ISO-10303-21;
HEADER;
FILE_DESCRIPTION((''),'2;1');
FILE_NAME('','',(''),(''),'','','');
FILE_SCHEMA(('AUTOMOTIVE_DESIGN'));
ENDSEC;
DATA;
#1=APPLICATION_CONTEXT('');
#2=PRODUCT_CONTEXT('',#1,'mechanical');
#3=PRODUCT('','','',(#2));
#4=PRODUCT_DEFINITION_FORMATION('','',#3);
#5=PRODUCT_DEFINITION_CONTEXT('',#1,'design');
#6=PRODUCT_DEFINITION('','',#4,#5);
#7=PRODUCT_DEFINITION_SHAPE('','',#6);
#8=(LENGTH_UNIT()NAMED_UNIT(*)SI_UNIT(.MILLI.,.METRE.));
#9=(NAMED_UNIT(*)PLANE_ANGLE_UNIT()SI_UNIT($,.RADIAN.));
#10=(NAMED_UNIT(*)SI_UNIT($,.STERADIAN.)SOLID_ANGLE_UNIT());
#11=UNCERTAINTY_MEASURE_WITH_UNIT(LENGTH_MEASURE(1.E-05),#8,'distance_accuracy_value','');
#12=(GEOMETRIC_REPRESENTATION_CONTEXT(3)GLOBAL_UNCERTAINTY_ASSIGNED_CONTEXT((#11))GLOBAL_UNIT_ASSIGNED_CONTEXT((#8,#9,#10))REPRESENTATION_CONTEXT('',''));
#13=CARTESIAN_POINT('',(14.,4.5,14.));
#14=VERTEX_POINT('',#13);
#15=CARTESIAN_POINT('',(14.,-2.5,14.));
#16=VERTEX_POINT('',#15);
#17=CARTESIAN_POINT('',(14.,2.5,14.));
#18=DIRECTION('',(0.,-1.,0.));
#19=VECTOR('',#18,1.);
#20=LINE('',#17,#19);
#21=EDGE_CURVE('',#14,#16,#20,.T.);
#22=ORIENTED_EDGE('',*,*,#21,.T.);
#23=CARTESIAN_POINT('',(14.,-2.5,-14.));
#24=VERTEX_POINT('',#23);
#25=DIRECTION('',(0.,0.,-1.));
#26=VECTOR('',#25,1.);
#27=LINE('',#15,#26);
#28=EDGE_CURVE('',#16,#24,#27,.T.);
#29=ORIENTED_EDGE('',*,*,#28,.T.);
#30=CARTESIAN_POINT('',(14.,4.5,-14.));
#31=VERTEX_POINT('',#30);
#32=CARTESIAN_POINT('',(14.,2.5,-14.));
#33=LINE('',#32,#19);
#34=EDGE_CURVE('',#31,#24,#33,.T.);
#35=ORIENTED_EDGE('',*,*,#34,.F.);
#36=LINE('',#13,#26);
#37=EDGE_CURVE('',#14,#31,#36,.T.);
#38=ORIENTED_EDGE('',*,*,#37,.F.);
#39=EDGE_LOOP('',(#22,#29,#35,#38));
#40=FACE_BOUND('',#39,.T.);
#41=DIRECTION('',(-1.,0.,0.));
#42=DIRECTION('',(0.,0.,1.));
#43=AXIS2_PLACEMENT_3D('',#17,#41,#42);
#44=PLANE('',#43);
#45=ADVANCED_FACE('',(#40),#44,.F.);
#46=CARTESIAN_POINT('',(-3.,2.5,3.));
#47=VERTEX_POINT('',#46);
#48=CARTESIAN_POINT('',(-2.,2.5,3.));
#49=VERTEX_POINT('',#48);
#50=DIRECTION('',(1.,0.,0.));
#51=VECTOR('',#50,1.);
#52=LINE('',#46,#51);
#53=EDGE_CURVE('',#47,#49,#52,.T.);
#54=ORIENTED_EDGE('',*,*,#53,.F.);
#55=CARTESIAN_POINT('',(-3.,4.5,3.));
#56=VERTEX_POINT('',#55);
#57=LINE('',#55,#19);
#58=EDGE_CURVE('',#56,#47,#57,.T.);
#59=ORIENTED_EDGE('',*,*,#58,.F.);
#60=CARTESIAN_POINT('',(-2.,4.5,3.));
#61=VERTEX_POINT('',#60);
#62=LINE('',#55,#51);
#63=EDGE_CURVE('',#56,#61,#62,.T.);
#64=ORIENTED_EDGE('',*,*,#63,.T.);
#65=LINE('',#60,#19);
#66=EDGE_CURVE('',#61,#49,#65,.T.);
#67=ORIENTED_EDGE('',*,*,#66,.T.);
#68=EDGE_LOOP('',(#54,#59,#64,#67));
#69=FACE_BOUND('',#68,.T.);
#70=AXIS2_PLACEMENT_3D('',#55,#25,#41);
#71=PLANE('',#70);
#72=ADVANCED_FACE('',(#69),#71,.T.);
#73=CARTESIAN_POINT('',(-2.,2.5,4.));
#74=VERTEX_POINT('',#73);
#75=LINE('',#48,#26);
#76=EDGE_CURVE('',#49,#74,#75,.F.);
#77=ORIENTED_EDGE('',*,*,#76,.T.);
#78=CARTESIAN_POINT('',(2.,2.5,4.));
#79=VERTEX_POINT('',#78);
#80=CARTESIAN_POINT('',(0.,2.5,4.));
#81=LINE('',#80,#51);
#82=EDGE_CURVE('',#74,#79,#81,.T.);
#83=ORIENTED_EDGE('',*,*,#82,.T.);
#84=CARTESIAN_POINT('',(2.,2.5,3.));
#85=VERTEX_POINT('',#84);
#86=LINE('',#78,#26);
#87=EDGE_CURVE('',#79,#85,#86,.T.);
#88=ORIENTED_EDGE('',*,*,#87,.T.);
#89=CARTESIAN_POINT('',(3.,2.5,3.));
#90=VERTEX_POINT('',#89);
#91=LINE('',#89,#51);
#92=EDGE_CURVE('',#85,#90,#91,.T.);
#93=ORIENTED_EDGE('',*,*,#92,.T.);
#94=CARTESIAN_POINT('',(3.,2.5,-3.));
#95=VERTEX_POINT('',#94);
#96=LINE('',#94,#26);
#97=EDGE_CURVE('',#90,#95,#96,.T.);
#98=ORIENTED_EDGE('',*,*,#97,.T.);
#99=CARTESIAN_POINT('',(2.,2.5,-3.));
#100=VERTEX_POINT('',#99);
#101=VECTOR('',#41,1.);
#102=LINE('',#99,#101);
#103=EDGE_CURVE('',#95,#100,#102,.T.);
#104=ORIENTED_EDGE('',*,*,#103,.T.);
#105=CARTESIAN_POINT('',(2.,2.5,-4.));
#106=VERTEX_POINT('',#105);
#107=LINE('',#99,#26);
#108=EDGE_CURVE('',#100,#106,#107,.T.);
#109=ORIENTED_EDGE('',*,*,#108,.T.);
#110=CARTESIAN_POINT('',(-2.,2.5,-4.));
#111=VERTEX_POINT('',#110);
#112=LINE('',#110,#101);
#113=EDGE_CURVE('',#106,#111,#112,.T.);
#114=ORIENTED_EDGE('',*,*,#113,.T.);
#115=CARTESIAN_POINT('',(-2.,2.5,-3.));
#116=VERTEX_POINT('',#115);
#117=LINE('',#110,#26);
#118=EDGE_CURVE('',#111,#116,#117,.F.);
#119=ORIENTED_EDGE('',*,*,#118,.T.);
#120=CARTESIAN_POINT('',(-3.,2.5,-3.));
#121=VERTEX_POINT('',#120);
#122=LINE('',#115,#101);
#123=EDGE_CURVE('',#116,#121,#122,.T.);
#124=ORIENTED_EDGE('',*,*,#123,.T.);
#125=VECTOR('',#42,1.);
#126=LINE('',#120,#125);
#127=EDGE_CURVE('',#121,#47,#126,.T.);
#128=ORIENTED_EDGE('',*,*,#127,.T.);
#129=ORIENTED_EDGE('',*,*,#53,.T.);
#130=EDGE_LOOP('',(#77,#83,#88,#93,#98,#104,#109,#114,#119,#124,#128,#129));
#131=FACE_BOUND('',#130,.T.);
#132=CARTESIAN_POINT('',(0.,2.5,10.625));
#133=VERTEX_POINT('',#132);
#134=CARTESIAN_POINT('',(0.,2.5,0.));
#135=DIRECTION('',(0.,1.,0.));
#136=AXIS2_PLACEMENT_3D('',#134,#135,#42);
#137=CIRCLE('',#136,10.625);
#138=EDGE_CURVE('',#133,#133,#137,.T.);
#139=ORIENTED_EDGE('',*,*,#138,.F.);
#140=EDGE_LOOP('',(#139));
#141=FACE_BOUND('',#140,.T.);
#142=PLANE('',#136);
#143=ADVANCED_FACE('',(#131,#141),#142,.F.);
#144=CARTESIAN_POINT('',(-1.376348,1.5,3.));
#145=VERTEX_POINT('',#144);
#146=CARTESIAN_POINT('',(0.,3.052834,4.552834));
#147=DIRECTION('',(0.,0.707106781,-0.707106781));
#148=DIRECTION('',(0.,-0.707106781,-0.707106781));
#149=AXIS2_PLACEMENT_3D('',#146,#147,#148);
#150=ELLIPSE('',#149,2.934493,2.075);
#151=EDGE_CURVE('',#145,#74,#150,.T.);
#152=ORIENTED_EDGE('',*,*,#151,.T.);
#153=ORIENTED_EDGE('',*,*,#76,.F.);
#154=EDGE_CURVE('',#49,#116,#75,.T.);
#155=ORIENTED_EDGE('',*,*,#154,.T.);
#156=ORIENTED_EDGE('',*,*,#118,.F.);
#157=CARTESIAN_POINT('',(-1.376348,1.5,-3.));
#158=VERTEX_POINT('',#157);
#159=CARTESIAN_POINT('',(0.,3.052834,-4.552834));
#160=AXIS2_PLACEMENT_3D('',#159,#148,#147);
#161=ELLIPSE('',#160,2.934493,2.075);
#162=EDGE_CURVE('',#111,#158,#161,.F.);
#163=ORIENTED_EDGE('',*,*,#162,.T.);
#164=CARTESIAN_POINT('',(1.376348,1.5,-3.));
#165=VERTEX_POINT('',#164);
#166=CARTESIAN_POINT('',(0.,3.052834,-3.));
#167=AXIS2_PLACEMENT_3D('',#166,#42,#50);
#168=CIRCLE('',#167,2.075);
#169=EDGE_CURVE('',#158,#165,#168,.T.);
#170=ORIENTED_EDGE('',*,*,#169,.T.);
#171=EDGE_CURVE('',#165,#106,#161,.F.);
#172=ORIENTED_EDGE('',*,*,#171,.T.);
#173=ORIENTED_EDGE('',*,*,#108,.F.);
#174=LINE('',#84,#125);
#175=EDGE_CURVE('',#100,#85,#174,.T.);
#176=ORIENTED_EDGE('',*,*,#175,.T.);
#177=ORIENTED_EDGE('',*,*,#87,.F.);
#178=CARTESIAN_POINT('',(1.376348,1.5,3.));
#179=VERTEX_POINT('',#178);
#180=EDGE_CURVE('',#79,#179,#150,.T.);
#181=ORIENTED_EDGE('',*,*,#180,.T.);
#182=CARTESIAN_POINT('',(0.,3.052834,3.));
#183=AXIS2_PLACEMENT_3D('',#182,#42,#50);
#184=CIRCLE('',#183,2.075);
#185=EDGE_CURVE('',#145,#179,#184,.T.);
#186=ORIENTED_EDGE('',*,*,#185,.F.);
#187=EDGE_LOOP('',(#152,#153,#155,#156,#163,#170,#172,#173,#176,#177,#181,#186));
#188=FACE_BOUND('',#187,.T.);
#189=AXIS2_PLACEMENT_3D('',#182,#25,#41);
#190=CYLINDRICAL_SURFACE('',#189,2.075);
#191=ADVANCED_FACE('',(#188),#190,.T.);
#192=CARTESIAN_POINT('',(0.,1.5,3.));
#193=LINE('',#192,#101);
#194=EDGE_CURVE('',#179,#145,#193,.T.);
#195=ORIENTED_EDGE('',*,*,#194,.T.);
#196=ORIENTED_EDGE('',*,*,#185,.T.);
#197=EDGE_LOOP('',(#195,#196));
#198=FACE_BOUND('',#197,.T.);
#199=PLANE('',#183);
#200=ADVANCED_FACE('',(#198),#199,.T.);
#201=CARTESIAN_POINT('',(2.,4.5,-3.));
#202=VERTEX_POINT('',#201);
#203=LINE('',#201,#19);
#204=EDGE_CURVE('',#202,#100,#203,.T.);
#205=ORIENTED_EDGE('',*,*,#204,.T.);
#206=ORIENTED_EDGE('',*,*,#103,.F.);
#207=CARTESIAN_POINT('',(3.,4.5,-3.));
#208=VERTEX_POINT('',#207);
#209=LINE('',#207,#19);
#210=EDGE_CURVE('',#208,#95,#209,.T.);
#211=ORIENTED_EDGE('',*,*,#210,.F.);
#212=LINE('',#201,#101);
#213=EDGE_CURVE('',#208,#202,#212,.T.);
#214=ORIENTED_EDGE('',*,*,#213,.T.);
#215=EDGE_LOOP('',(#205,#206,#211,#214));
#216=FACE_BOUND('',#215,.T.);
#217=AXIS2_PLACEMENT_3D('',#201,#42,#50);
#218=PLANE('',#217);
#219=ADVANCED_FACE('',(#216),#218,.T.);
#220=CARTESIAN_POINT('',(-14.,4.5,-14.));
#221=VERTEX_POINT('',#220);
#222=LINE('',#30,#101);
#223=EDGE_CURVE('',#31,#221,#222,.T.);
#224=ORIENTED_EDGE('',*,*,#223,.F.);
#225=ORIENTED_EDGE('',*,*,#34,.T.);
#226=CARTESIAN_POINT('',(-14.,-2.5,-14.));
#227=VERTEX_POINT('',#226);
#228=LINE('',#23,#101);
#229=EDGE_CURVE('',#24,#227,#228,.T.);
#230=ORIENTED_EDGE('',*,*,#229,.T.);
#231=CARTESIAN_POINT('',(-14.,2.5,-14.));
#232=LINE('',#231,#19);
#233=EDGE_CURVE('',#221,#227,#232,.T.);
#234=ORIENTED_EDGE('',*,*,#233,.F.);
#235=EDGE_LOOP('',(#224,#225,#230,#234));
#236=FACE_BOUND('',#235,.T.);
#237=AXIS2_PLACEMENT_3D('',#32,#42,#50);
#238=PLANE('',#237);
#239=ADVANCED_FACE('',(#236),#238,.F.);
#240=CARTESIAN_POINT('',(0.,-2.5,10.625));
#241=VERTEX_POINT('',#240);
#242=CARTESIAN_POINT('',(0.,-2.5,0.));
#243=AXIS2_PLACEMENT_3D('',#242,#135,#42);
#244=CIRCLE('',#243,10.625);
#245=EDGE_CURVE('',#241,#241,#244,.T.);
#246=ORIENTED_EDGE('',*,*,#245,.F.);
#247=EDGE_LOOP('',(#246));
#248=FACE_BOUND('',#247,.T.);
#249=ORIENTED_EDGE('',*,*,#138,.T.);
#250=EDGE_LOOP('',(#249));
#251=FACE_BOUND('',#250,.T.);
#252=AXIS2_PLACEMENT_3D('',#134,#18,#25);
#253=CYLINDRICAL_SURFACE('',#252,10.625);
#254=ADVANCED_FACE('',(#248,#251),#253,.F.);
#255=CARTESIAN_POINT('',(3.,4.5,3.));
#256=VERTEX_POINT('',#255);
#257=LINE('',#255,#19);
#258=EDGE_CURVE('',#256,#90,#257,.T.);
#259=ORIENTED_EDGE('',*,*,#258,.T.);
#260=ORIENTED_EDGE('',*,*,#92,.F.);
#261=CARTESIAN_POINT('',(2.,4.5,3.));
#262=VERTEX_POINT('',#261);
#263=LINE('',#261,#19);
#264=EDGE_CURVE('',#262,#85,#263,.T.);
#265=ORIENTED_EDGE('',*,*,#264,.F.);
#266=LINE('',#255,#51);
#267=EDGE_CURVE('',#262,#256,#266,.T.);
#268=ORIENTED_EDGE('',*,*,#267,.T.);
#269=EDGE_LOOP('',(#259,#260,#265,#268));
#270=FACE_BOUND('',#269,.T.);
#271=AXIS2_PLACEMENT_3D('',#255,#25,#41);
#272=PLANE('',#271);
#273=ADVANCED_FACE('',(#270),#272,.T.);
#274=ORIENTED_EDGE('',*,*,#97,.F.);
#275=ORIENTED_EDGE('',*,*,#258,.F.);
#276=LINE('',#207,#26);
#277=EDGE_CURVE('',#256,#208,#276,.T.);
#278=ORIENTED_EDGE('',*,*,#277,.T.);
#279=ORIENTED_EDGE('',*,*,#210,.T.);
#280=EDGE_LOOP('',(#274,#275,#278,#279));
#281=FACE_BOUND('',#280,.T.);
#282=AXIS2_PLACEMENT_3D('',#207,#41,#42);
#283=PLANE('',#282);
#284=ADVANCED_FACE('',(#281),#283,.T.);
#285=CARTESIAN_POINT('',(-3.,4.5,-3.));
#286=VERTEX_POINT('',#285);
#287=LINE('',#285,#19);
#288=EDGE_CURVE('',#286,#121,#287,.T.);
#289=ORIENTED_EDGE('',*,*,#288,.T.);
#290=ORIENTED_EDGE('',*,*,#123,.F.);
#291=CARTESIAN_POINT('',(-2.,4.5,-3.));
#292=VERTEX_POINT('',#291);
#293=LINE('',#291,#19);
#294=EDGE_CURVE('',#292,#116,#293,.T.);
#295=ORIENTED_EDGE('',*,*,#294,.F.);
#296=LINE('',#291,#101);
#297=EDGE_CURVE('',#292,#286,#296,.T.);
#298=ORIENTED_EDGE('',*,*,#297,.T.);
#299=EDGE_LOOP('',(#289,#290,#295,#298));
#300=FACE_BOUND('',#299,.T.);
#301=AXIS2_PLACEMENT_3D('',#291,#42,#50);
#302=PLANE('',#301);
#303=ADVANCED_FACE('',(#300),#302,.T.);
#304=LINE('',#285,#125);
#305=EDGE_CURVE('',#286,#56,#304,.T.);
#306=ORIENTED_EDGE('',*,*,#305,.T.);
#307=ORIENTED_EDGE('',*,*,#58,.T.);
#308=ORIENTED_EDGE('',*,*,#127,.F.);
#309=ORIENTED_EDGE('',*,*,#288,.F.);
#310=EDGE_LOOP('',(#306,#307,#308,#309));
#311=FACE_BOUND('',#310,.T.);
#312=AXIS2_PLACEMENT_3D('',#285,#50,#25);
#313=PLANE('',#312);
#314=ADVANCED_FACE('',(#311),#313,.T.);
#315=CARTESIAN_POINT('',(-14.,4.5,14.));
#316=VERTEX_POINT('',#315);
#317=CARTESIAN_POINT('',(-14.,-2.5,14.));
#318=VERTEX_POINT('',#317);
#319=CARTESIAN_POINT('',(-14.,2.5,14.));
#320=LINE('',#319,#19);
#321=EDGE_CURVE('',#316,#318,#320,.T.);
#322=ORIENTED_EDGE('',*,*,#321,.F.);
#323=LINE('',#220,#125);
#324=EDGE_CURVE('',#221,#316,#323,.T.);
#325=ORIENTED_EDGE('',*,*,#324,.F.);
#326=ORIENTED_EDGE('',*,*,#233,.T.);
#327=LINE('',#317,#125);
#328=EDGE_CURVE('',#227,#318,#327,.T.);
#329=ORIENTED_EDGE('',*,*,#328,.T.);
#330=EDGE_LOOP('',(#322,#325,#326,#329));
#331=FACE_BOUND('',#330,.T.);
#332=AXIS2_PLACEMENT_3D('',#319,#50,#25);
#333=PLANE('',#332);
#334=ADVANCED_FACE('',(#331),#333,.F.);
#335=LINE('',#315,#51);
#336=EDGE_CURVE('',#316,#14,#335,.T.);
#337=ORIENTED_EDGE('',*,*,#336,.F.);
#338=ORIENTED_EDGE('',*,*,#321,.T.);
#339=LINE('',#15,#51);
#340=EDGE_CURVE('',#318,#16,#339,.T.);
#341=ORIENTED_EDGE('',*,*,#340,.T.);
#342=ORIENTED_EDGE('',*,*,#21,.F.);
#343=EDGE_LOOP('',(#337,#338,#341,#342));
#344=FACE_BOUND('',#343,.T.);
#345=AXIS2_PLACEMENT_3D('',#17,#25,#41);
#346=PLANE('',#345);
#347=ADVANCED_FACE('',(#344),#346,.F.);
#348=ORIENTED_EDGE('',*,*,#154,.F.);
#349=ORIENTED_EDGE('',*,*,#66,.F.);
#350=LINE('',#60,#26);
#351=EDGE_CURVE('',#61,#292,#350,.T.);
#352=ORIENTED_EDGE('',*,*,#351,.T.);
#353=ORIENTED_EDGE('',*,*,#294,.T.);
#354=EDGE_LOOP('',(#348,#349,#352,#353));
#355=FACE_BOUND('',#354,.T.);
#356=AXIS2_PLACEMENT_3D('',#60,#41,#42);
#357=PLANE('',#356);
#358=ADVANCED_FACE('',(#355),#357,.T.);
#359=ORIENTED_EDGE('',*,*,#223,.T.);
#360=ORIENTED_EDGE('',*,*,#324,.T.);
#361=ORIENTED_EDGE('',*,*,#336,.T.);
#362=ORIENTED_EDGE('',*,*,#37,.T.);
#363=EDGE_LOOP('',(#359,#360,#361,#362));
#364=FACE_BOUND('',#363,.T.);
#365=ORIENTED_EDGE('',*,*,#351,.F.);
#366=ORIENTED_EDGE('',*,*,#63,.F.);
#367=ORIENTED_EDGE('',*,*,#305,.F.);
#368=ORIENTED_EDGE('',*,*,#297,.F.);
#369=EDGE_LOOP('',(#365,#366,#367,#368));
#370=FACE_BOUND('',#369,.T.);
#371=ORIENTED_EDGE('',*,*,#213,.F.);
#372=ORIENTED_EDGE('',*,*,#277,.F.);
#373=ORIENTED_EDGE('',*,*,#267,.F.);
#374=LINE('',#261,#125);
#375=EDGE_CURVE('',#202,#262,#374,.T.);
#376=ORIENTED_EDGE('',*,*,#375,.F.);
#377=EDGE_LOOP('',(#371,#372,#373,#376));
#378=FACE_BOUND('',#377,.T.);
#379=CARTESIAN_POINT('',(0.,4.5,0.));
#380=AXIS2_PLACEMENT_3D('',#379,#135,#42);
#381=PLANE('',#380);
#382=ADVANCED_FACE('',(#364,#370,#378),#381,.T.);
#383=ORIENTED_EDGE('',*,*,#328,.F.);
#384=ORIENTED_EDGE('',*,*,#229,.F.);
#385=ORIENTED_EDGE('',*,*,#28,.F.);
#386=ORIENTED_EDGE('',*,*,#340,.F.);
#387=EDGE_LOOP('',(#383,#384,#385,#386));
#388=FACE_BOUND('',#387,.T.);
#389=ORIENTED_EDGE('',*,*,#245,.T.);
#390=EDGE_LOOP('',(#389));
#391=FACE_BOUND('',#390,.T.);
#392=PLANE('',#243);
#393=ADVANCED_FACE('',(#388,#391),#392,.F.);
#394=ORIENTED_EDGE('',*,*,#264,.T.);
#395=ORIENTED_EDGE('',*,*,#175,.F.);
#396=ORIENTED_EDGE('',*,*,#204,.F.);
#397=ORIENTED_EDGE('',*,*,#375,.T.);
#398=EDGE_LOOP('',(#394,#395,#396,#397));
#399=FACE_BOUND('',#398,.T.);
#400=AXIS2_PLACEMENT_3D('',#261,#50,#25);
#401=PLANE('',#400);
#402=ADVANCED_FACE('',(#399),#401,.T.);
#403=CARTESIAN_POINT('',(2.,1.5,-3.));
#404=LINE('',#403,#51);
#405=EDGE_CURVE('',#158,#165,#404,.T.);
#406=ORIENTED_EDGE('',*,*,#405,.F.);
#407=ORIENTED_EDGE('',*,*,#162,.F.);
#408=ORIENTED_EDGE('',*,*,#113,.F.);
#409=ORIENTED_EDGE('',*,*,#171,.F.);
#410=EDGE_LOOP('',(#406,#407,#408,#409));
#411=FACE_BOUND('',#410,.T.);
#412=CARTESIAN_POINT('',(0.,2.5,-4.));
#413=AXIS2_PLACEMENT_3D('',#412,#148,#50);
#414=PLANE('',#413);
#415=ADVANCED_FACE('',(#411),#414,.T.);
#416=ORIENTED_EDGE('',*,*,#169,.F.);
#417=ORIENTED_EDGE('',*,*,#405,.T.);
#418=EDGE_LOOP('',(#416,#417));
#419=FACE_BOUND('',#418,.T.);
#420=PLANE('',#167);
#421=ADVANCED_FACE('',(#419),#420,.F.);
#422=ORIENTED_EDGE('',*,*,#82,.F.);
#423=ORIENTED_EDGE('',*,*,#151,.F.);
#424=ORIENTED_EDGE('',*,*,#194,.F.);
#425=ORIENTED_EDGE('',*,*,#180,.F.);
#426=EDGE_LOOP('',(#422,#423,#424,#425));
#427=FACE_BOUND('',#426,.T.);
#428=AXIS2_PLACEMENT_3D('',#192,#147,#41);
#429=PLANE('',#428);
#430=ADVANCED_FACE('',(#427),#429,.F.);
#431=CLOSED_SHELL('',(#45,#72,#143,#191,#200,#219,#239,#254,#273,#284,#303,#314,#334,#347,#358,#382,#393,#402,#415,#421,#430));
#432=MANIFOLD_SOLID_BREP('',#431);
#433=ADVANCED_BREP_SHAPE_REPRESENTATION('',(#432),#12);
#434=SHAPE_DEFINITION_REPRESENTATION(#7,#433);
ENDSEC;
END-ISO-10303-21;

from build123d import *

# Parameters (mm, degrees)
SKETCH1_W           = 28
SKETCH1_H           = 28
SKETCH1_R           = 10.625
BOSS_EXTRUDE1_DEPTH = 2.5
SKETCH2_W           = 28
SKETCH2_H           = 28
SKETCH2_W_2         = 1
SKETCH2_H_2         = 6
BOSS_EXTRUDE2_DEPTH = 2
BOSS_EXTRUDE3_DEPTH = 3
CHAMFER1_SIZE       = 1


with BuildPart() as part:
    # Sketch1 → Boss-Extrude1 (new, symmetric)
    with BuildSketch(Plane(origin=(0, 0, 0), x_dir=(1, 0, 0), z_dir=(0, 1, 0))):
        Rectangle(SKETCH1_W, SKETCH1_H)
        with Locations(Location((0, 0, 0), (0, 0, 270))):
            Circle(SKETCH1_R, mode=Mode.SUBTRACT)
    extrude(amount=BOSS_EXTRUDE1_DEPTH, both=True)

    # Sketch2 → Boss-Extrude2 (add)
    with BuildSketch(Plane(origin=(0, 2.5, 0), x_dir=(1, 0, 0), z_dir=(0, 1, 0))):
        Rectangle(SKETCH2_W, SKETCH2_H)
        with Locations((-2.5, 0)):
            Rectangle(SKETCH2_W_2, SKETCH2_H_2, mode=Mode.SUBTRACT)
        with Locations((2.5, 0)):
            Rectangle(SKETCH2_W_2, SKETCH2_H_2, mode=Mode.SUBTRACT)
    extrude(amount=BOSS_EXTRUDE2_DEPTH)

    # Sketch3 → Boss-Extrude3 (add, symmetric)
    with BuildSketch(Plane.XY):
        with BuildLine():
            Line((-2, 2.5), (2, 2.5))
            ThreePointArc((2, 2.5), (0, 0.97783361), (-2, 2.5))
        make_face()
    extrude(amount=BOSS_EXTRUDE3_DEPTH, both=True)

    # Chamfer1
    # the kernel refuses this chamfer: 1 mm, written as the material it adds along each edge
    with BuildSketch(Plane(origin=(-4.571682988, 2.5, -3), x_dir=(0, 0.027495876610586487, -0.9996219169112968), z_dir=(1, 0, 0))) as chamfer1_piece_1_section:
        Polygon((CHAMFER1_SIZE * 0.999621916911, -CHAMFER1_SIZE * 0.0274958766106), (-CHAMFER1_SIZE * 0.0274958766106, -CHAMFER1_SIZE * 0.999621916911), (0, 0), align=None)
    chamfer1_piece_1 = extrude(amount=9.143365976, mode=Mode.PRIVATE)
    chamfer1_piece_1 = chamfer1_piece_1 & Plane(origin=(0, 3.05283361, -3.341258545), x_dir=(0.9638554216867474, -0.266425835993926, 0), z_dir=(0, 0, 1)) * Cylinder(2.075, 23, mode=Mode.PRIVATE)
    add(chamfer1_piece_1)
    with BuildSketch(Plane(origin=(-4.571682988, 2.5, 3), x_dir=(0, 0.027495876610586487, 0.9996219169112968), z_dir=(1, 0, 0))) as chamfer1_piece_2_section:
        Polygon((CHAMFER1_SIZE * 0.999621916911, CHAMFER1_SIZE * 0.0274958766106), (-CHAMFER1_SIZE * 0.0274958766106, CHAMFER1_SIZE * 0.999621916911), (0, 0), align=None)
    chamfer1_piece_2 = extrude(amount=9.143365976, mode=Mode.PRIVATE)
    chamfer1_piece_2 = chamfer1_piece_2 & Plane(origin=(0, 3.05283361, 3.341258545), x_dir=(0.9638554216867474, -0.266425835993926, 0), z_dir=(0, 0, 1)) * Cylinder(2.075, 23, mode=Mode.PRIVATE)
    add(chamfer1_piece_2)


solid = part.part
